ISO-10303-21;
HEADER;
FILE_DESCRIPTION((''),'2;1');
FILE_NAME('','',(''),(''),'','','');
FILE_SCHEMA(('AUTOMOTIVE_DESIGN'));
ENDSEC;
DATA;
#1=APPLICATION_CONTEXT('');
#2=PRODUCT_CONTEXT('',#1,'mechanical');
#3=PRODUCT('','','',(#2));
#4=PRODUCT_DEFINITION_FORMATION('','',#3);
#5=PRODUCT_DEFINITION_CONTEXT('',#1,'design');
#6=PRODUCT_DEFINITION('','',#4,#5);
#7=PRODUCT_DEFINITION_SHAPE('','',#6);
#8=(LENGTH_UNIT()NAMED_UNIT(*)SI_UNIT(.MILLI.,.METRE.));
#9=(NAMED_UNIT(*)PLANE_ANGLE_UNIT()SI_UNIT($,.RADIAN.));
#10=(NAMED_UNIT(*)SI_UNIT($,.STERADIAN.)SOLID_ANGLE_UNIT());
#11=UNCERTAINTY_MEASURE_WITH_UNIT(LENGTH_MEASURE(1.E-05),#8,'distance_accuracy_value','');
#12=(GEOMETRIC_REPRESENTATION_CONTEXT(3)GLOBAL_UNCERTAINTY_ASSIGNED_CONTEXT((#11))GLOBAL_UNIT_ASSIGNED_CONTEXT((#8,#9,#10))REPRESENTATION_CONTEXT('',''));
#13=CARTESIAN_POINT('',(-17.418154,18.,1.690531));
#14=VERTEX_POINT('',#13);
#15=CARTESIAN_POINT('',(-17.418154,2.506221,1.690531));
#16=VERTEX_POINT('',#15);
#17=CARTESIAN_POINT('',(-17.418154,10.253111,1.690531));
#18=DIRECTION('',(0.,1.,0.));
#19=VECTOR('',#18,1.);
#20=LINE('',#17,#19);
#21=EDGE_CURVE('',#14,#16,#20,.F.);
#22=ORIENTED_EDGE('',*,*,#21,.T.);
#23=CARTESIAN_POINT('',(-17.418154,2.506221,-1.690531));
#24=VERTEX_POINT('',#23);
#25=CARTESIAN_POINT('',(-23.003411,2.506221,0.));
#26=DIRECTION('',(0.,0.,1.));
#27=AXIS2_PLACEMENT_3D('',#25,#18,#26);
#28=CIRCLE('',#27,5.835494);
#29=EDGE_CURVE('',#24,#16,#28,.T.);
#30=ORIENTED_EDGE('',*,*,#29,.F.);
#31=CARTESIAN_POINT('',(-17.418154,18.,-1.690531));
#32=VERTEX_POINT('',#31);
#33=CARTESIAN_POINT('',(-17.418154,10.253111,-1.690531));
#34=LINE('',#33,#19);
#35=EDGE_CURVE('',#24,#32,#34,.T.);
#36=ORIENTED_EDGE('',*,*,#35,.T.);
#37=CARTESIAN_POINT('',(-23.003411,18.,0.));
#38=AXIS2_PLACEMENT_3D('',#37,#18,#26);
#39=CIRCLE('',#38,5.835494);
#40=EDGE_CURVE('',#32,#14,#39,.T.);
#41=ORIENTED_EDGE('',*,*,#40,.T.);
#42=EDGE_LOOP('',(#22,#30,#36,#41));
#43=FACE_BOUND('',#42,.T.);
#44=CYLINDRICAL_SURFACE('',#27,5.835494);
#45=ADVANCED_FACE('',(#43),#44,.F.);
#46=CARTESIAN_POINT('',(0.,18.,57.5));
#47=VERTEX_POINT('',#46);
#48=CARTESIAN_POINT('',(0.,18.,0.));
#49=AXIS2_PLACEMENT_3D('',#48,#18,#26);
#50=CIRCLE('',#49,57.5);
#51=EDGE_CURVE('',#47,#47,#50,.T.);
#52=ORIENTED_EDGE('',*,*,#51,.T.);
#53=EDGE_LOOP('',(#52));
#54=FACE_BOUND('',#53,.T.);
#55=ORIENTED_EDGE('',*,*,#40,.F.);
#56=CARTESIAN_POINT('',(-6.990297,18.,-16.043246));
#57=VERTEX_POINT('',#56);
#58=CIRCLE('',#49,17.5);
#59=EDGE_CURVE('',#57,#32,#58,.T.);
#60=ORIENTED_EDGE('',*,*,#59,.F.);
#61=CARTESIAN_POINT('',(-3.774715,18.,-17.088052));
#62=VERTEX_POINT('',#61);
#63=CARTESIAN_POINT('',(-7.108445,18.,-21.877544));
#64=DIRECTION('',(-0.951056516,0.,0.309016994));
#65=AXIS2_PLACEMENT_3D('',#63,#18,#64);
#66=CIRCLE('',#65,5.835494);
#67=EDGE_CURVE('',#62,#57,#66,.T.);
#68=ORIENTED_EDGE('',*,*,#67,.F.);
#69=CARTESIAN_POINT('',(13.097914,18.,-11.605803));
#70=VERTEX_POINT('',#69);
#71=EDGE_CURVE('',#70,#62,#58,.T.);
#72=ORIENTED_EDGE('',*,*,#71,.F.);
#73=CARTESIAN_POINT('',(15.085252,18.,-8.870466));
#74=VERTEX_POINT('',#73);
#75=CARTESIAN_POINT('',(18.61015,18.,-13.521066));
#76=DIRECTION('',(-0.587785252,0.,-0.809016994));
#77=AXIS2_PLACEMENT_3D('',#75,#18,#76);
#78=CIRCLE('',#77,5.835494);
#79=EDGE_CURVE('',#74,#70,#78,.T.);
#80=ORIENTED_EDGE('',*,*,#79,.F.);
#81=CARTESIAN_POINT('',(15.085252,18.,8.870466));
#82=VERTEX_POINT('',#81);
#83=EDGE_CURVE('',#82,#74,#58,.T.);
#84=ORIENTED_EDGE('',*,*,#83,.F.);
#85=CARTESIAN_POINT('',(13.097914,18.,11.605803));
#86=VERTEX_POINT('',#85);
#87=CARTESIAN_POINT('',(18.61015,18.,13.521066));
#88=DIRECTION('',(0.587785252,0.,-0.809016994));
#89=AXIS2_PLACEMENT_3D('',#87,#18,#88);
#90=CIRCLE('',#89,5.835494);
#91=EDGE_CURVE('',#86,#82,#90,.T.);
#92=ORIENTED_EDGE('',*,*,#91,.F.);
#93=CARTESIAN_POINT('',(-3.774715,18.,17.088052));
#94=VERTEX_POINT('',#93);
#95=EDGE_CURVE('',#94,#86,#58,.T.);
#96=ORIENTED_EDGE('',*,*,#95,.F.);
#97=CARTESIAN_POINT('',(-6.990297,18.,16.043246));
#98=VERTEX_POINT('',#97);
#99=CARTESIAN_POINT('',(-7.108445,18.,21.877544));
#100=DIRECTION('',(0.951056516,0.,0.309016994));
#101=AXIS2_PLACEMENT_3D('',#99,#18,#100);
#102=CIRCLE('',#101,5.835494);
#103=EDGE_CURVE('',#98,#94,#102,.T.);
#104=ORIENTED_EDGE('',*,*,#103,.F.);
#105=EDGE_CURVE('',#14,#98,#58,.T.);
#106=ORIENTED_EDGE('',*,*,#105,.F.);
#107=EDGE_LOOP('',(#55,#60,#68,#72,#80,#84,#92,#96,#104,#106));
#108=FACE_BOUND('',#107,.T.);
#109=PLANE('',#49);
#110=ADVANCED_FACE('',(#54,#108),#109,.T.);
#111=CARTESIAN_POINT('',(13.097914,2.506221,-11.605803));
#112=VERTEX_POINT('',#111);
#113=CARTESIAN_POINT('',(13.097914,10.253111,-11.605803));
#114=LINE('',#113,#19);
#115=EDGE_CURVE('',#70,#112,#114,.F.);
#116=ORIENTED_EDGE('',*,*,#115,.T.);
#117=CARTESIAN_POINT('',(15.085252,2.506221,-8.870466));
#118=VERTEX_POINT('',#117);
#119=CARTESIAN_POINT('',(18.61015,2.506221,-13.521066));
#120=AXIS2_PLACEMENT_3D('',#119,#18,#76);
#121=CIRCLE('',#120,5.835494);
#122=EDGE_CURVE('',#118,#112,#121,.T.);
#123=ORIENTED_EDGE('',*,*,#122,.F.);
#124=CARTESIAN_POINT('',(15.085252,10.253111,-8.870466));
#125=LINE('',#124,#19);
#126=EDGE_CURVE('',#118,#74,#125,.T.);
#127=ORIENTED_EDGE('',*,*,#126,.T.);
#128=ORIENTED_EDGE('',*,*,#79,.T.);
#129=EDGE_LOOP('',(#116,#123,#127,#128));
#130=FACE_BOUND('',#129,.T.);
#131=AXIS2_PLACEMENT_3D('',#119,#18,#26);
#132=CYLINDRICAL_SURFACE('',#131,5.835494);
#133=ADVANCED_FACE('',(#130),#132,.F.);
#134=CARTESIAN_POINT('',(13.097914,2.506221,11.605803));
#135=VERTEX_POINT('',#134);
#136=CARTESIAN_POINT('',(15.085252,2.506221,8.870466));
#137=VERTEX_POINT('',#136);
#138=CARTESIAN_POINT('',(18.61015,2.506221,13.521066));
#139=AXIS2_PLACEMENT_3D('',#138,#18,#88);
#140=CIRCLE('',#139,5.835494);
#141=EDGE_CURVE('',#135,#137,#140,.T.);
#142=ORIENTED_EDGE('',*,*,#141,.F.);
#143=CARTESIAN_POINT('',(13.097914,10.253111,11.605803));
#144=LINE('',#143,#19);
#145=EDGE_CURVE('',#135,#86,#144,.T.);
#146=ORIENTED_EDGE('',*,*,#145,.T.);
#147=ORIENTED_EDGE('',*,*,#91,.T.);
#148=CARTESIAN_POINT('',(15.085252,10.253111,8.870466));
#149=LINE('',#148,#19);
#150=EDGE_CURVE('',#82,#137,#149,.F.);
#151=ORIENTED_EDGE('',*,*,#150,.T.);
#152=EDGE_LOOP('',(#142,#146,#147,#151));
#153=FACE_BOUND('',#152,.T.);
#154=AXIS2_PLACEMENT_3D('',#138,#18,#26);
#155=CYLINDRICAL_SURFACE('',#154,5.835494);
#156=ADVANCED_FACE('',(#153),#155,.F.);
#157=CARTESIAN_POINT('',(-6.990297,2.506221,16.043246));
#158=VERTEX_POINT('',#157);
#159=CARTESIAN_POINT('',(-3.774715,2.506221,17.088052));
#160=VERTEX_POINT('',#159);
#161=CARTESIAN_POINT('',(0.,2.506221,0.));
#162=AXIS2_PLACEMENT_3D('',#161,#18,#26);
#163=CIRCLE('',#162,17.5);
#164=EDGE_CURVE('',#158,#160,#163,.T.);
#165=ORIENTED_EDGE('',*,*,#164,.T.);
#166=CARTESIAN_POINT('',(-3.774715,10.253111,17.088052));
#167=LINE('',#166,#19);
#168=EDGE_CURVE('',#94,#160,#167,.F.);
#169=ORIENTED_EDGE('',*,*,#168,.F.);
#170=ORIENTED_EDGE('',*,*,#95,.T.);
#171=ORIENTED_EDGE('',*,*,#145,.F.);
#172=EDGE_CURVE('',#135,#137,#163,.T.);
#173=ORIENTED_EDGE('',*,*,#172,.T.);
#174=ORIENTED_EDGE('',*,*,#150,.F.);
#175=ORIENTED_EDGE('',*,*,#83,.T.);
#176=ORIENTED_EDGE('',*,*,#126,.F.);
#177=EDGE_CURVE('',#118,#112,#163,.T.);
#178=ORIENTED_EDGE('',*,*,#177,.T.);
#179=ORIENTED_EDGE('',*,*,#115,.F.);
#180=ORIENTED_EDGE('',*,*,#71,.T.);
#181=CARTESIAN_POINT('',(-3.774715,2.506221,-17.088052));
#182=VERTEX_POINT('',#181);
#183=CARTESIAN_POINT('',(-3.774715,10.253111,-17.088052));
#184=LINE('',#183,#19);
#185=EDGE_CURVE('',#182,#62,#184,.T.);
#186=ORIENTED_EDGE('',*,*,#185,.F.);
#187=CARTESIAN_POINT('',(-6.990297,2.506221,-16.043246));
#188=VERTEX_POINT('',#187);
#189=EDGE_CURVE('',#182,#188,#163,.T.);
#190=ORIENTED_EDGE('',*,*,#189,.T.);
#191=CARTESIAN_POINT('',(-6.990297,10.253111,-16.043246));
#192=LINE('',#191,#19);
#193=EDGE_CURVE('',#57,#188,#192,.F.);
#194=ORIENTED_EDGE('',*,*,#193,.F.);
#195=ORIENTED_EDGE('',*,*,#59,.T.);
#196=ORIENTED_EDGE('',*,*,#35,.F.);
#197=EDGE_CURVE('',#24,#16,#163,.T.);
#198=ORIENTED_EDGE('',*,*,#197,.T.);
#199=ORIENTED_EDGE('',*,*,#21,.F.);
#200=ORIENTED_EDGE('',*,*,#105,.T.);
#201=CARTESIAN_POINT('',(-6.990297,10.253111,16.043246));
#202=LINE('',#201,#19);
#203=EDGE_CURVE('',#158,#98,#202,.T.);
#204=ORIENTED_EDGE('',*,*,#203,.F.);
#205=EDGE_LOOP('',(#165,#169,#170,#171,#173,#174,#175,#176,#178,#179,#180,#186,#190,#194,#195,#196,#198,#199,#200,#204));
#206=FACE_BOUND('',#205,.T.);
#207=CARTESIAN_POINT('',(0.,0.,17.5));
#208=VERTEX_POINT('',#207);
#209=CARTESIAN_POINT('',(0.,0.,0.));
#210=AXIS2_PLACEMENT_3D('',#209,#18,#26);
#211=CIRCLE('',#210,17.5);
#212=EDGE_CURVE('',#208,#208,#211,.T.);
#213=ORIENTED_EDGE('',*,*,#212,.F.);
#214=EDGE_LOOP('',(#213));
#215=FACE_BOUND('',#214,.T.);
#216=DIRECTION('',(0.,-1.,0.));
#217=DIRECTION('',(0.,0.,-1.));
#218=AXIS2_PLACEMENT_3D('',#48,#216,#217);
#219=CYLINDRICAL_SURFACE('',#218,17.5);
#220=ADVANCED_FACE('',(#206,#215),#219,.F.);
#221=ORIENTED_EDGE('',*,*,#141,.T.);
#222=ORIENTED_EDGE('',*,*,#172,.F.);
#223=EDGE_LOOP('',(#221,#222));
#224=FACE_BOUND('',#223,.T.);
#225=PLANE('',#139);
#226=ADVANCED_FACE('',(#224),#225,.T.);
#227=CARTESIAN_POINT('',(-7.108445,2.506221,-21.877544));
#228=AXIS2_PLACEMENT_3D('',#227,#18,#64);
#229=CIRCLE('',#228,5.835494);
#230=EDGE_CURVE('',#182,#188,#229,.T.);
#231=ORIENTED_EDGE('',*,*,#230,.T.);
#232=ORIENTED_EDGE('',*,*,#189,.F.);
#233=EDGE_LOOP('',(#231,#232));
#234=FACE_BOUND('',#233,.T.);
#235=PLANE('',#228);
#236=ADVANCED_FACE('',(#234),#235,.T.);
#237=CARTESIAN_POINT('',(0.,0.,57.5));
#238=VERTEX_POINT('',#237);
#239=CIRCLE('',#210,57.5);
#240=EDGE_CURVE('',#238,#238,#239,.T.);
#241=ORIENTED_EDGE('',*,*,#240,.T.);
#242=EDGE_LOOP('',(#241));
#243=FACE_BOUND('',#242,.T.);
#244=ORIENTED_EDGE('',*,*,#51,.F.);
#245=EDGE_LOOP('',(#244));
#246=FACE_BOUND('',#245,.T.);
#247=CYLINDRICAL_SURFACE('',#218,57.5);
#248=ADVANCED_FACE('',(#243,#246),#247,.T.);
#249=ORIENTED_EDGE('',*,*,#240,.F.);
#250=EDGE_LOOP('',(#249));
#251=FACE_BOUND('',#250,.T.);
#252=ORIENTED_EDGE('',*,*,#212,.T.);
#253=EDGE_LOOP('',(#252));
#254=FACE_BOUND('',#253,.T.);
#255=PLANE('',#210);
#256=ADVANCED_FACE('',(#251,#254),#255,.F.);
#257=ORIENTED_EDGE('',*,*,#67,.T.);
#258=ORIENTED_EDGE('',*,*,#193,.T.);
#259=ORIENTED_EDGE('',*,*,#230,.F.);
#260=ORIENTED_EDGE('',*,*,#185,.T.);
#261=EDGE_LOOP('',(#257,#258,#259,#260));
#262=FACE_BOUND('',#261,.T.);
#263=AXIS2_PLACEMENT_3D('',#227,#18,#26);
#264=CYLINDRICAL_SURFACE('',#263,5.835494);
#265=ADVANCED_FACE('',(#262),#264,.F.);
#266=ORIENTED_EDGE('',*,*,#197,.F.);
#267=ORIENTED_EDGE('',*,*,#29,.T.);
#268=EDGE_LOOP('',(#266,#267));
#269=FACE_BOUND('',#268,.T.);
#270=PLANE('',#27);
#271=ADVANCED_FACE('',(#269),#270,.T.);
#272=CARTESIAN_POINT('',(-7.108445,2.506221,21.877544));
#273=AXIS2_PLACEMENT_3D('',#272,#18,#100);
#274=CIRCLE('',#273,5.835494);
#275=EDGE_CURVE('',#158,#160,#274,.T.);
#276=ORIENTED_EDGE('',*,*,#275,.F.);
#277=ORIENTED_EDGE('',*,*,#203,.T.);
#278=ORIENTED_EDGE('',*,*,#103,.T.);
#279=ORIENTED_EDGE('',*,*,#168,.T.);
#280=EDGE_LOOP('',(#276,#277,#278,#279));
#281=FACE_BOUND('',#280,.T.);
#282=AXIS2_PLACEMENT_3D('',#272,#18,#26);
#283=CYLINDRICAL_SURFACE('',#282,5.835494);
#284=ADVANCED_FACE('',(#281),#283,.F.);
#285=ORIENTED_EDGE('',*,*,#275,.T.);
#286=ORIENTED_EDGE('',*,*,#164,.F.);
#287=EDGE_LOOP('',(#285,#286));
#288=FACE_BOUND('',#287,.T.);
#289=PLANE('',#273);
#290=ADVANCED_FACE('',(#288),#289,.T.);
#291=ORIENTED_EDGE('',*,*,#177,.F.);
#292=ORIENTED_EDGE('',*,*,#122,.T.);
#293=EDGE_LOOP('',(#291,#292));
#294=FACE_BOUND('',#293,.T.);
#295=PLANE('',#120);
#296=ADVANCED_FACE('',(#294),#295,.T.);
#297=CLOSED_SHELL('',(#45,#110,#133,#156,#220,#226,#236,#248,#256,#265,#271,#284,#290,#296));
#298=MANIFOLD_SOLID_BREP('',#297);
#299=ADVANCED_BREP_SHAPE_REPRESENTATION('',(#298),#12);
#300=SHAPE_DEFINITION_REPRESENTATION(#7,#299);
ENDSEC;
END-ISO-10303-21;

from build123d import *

# Parameters (mm, degrees)
SKETCH1_R           = 57.5
BOSS_EXTRUDE1_DEPTH = 18
SKETCH2_R           = 17.5
CUT_EXTRUDE1_DEPTH  = 84.285653026
SKETCH3_R           = 5.835493776
CUT_EXTRUDE2_DEPTH  = 15.493778772
CIRPATTERN1_COUNT   = 5


with BuildPart() as part:
    # Sketch1 → Boss-Extrude1 (new body)
    with BuildSketch(Plane(origin=(0, 0, 0), x_dir=(1, 0, 0), z_dir=(0, 1, 0))):
        Circle(SKETCH1_R)
    extrude(amount=BOSS_EXTRUDE1_DEPTH)

    # Sketch2 → Cut-Extrude1 (cut, through all)
    with BuildSketch(Plane(origin=(0, 0, 0), x_dir=(1, 0, 0), z_dir=(0, 1, 0))):
        Circle(SKETCH2_R)
    extrude(amount=CUT_EXTRUDE1_DEPTH, mode=Mode.SUBTRACT)

    # Sketch3 → Cut-Extrude2 (cut)
    with BuildSketch(Plane(origin=(0, 18, 0), x_dir=(1, 0, 0), z_dir=(0, 1, 0))):
        with Locations((-23.003411052, 0)):
            Circle(SKETCH3_R)
    cut_extrude2 = extrude(amount=-CUT_EXTRUDE2_DEPTH, mode=Mode.SUBTRACT)

    # CirPattern1: Cut-Extrude2 ×5 about axis
    cirpattern1_axis = Axis((0, 0, 0), (0, 1, 0))
    for i in range(1, CIRPATTERN1_COUNT):
        add(cut_extrude2.rotate(cirpattern1_axis, i * 360 / CIRPATTERN1_COUNT), mode=Mode.SUBTRACT)


solid = part.part
